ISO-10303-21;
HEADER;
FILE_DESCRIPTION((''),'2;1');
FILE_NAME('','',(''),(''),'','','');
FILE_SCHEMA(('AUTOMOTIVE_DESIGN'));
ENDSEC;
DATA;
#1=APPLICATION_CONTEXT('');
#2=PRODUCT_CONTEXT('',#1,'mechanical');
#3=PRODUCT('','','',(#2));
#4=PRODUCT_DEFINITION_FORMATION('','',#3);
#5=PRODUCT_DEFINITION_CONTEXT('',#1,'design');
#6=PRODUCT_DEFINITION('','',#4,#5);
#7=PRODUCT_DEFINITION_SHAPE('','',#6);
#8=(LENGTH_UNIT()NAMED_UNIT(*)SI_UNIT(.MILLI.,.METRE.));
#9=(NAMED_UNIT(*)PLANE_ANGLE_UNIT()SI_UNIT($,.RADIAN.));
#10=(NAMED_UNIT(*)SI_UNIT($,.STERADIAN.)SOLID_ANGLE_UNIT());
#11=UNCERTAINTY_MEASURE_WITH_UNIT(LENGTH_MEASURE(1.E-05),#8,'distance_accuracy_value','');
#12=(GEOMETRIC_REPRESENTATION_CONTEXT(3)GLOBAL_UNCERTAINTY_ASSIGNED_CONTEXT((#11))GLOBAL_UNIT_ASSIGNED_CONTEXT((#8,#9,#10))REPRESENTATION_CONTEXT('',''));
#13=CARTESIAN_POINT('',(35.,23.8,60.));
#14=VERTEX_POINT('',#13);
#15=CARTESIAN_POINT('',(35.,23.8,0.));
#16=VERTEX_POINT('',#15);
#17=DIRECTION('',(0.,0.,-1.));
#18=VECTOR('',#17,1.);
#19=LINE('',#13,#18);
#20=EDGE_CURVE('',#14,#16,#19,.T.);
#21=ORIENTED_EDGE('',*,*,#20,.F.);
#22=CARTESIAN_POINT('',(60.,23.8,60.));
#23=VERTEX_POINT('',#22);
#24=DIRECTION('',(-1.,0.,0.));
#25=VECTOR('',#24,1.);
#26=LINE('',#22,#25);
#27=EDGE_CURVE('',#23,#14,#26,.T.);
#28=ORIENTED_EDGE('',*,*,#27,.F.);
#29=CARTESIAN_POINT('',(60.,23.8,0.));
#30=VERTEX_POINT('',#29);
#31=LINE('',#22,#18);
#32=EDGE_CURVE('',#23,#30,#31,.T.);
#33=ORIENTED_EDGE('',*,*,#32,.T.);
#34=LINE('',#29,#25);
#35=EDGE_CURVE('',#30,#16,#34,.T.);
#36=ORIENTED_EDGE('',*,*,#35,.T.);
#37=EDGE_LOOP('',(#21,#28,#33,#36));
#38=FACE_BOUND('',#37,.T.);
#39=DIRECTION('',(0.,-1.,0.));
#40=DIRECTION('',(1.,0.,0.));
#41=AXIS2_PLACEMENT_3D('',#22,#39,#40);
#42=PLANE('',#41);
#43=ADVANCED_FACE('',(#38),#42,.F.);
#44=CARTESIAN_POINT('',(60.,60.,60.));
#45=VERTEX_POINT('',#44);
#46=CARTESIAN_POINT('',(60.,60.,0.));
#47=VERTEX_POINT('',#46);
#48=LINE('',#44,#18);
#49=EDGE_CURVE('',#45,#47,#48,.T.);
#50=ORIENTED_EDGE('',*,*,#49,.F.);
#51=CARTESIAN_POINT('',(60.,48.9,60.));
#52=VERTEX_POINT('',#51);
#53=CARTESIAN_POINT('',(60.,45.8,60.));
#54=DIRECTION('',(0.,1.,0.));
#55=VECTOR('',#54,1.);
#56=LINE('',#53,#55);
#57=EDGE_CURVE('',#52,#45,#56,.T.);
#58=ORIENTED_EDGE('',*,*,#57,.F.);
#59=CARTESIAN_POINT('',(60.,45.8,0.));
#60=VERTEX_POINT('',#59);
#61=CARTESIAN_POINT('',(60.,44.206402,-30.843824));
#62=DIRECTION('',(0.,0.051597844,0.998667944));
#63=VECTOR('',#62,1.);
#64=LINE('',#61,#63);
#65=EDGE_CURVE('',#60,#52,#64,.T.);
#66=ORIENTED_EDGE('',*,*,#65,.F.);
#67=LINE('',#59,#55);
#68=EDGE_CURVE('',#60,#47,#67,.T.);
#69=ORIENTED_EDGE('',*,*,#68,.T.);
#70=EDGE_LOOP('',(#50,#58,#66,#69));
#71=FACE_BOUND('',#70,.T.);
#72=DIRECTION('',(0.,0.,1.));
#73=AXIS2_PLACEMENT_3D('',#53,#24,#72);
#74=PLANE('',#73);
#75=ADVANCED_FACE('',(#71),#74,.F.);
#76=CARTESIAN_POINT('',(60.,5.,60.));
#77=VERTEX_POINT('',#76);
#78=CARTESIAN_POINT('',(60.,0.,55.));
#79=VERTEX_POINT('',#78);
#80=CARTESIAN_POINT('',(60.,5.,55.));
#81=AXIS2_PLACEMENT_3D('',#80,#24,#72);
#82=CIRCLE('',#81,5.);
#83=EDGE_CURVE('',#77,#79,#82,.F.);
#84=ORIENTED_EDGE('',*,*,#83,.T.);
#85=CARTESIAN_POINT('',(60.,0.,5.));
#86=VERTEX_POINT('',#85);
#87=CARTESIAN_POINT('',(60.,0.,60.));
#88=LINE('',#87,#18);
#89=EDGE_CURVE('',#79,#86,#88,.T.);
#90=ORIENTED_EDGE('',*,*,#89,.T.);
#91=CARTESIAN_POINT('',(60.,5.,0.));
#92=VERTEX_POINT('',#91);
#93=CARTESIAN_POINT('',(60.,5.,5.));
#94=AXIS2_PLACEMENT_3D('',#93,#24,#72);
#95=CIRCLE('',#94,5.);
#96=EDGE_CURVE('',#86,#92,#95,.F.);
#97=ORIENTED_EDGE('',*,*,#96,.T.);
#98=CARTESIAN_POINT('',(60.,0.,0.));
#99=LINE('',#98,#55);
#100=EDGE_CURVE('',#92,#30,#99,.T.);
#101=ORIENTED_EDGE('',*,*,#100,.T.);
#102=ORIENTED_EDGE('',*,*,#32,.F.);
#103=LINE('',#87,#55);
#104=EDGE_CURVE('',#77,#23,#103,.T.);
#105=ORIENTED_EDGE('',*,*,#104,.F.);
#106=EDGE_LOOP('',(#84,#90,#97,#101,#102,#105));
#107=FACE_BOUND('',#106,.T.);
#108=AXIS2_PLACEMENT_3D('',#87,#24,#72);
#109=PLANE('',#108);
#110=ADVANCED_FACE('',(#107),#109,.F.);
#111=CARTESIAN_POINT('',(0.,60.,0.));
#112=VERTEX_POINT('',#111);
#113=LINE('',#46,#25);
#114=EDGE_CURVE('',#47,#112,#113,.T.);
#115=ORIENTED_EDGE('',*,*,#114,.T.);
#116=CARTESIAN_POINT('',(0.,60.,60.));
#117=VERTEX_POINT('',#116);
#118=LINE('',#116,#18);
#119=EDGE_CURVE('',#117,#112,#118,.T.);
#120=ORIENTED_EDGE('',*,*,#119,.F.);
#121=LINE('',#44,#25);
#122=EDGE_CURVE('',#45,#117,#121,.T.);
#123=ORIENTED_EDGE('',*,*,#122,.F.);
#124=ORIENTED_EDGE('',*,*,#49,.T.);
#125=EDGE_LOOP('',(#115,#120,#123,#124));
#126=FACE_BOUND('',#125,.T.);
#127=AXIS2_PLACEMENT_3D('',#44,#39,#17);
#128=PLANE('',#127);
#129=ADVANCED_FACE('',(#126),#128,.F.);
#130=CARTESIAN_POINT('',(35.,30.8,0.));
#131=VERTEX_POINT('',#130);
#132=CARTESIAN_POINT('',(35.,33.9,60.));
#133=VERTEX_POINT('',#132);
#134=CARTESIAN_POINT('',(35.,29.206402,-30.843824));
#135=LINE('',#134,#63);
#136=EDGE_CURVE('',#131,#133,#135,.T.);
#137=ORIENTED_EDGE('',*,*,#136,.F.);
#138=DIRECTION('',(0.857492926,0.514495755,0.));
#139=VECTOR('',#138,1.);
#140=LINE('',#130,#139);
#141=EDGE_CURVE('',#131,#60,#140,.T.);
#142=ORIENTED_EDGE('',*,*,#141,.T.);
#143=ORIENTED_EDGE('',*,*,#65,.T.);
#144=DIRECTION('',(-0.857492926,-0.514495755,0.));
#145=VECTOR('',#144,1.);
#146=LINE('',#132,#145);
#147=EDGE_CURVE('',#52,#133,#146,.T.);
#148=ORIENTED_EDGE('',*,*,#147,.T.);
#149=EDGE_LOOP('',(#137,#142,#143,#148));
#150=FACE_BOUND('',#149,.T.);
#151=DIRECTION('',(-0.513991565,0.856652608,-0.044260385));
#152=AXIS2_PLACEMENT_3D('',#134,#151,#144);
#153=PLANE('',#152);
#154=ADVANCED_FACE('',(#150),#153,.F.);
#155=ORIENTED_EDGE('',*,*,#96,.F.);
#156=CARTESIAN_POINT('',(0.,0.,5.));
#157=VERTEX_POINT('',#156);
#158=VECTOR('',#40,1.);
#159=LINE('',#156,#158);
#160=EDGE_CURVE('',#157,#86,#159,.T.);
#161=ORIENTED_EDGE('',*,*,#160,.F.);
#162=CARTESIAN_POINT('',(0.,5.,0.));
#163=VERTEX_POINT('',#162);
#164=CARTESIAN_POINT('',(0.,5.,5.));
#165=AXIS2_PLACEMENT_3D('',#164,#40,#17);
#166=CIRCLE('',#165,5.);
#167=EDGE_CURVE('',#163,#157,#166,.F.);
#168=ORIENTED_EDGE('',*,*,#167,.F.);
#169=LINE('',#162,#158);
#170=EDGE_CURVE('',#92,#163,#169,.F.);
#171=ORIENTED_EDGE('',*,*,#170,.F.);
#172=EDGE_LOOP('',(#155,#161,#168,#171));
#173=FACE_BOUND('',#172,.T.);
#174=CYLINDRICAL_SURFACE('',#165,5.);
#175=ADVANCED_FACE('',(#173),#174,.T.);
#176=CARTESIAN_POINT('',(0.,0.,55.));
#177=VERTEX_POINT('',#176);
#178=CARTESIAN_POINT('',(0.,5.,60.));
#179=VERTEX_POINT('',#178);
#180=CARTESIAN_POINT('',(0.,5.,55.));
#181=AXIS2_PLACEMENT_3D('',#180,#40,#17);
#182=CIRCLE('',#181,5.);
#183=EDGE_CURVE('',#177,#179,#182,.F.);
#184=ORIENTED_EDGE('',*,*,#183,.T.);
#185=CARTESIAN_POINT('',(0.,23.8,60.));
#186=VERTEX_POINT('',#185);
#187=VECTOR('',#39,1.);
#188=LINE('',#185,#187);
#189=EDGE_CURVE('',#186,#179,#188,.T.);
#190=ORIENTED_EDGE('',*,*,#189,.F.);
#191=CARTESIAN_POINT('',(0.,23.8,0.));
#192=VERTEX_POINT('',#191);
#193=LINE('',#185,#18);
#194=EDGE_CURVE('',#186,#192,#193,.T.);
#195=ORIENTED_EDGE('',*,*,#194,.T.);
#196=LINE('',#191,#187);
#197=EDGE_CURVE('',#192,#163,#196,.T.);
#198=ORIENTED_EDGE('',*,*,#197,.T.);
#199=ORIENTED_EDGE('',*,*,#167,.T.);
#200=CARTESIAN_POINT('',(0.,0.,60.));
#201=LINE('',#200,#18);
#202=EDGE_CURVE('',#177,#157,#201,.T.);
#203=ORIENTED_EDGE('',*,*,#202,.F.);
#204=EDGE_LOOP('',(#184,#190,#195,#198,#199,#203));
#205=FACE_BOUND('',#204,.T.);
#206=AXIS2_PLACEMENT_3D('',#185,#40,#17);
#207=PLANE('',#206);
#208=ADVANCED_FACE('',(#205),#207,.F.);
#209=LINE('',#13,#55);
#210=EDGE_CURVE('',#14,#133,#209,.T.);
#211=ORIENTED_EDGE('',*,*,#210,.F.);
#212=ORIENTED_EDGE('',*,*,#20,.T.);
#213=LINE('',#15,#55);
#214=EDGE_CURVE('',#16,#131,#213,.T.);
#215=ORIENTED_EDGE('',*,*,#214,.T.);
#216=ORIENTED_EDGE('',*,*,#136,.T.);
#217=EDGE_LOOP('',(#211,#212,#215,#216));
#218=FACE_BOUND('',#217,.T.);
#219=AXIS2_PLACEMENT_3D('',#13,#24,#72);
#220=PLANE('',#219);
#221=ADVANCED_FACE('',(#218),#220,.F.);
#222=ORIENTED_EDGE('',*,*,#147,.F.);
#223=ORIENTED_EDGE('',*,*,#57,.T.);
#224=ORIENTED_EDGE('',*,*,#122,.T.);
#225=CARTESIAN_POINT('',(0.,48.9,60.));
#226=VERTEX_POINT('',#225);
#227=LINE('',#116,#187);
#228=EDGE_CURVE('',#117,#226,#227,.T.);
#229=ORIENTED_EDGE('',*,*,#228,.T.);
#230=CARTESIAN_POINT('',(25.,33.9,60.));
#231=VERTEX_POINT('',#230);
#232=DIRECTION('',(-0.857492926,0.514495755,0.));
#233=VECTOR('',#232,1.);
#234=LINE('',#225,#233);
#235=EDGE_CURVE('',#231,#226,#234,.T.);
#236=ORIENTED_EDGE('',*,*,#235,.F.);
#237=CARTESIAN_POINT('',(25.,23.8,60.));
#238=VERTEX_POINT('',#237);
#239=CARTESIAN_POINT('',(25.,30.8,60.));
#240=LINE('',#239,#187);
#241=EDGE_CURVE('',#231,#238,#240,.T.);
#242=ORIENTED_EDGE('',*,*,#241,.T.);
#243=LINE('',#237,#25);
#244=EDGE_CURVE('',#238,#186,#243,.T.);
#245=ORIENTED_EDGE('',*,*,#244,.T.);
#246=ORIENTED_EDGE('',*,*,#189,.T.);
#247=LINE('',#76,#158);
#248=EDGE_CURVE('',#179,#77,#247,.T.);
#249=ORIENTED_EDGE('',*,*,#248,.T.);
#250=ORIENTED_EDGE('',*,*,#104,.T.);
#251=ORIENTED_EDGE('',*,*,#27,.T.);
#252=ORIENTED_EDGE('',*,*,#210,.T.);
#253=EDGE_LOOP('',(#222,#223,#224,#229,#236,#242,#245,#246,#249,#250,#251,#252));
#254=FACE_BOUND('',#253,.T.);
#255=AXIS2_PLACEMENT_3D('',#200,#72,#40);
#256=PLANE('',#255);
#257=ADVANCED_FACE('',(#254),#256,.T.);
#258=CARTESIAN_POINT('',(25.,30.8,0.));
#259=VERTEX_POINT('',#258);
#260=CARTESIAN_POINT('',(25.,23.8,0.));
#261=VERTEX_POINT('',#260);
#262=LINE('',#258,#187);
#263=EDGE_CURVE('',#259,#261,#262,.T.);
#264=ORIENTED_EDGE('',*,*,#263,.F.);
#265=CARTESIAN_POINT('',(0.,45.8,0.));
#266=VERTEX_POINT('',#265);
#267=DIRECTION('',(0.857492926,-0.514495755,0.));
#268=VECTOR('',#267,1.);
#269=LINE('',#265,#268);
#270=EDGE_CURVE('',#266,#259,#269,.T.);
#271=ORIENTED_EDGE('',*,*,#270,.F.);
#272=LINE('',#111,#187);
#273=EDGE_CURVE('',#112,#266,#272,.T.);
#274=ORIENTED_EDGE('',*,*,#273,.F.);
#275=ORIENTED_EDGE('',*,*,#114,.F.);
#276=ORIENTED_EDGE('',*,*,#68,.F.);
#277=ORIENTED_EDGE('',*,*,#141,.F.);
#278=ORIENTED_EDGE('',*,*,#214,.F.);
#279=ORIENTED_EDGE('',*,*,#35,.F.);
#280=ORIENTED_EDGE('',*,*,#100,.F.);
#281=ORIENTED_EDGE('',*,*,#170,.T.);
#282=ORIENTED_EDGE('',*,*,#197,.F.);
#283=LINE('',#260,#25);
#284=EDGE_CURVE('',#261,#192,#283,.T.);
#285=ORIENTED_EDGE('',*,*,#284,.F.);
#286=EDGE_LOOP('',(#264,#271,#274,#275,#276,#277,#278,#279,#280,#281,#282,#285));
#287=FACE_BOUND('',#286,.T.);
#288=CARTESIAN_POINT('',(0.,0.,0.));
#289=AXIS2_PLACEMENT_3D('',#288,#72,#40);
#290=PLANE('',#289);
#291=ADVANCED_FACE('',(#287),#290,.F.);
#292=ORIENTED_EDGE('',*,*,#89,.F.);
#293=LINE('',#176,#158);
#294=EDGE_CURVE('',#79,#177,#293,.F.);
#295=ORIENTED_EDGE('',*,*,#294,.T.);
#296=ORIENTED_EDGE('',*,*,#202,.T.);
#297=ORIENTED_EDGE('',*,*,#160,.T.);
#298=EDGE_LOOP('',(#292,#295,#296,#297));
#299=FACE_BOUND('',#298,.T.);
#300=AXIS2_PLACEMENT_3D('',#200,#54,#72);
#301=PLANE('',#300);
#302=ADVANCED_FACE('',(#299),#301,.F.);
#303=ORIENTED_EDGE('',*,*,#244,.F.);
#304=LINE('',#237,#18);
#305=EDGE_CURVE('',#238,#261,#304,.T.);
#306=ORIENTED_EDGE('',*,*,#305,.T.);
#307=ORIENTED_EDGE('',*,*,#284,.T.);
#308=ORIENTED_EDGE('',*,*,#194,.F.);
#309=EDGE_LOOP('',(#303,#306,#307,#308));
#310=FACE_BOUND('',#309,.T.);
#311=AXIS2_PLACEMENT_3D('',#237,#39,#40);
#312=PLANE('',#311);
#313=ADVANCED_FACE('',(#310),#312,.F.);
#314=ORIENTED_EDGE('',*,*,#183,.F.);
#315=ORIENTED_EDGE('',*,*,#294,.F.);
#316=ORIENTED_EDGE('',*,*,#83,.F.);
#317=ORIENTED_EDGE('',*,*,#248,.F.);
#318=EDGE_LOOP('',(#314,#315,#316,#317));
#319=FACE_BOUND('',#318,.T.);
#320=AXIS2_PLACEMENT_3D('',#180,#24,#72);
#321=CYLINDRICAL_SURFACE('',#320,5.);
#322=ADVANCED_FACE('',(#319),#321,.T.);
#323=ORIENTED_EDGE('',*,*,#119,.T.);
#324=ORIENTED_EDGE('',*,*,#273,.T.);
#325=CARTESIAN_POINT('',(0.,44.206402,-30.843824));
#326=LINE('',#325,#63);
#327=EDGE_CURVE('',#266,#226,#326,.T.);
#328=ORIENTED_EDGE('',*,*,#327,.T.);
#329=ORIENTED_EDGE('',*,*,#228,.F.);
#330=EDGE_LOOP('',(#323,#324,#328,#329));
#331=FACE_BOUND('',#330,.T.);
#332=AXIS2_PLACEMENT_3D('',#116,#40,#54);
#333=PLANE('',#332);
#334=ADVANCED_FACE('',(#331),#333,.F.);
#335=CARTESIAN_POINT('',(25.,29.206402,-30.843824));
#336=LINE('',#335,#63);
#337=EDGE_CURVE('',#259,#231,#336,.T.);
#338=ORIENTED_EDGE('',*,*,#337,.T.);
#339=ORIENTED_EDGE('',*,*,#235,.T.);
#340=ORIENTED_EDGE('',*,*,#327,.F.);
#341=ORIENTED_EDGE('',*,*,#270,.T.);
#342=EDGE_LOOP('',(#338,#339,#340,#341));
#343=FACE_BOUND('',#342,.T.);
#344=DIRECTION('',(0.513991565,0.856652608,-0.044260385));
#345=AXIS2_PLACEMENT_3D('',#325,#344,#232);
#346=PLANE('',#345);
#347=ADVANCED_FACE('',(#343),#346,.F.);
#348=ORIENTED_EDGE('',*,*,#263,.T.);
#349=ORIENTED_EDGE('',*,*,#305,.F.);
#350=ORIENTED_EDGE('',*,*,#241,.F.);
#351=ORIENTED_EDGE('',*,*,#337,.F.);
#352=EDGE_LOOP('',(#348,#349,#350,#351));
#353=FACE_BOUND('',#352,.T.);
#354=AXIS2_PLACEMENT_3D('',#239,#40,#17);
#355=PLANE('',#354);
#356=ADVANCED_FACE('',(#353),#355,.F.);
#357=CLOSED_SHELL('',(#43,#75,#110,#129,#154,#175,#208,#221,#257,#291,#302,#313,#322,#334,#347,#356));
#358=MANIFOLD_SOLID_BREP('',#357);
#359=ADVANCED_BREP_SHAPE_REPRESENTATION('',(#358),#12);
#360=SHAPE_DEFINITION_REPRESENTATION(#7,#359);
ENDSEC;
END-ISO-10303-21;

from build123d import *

# Parameters (mm, degrees)
BOSS_EXTRU_1_DEPTH      = 60
ENL_V_START             = 1.589213588
ENL_V_MAT_EXTRU_1_DEPTH = 60.853997617
CONG_1_R                = 5


# Read off the part's stored shape, not the designer's step: Enlèv. mat.-Extru.1
with BuildPart() as part:
    # Esquisse1 → Boss.-Extru.1 (new body)
    with BuildSketch(Plane.XY):
        Polygon((0, 0), (60, 0), (60, 23.8), (35, 23.8), (35, 30.8), (60, 45.8), (60, 60), (0, 60), (0, 45.8), (25, 30.8), (25, 23.8), (0, 23.8), align=None)
    extrude(amount=BOSS_EXTRU_1_DEPTH)

    # Enlèv. mat.-Extru.1 outline → Enlèv. mat.-Extru.1 (cut)
    with BuildSketch(Plane(origin=(0, 0, 0), x_dir=(1, 0, 0), z_dir=(0, 0.05159784377706792, 0.9986679440722813)).offset(ENL_V_START)):
        Polygon((60, 45.738991839), (35, 30.758972677), (35, 26), (60, 26), align=None)
        Polygon((0, 26), (25, 26), (25, 30.758972677), (0, 45.738991839), align=None)
    extrude(amount=ENL_V_MAT_EXTRU_1_DEPTH, mode=Mode.SUBTRACT)

    # Congé1
    cong_1_edges = [part.edges().sort_by_distance(p)[0] for p in [
        (30, 0, 0),
        (30, 0, 60),
    ]]
    fillet(cong_1_edges, radius=CONG_1_R)


solid = part.part
